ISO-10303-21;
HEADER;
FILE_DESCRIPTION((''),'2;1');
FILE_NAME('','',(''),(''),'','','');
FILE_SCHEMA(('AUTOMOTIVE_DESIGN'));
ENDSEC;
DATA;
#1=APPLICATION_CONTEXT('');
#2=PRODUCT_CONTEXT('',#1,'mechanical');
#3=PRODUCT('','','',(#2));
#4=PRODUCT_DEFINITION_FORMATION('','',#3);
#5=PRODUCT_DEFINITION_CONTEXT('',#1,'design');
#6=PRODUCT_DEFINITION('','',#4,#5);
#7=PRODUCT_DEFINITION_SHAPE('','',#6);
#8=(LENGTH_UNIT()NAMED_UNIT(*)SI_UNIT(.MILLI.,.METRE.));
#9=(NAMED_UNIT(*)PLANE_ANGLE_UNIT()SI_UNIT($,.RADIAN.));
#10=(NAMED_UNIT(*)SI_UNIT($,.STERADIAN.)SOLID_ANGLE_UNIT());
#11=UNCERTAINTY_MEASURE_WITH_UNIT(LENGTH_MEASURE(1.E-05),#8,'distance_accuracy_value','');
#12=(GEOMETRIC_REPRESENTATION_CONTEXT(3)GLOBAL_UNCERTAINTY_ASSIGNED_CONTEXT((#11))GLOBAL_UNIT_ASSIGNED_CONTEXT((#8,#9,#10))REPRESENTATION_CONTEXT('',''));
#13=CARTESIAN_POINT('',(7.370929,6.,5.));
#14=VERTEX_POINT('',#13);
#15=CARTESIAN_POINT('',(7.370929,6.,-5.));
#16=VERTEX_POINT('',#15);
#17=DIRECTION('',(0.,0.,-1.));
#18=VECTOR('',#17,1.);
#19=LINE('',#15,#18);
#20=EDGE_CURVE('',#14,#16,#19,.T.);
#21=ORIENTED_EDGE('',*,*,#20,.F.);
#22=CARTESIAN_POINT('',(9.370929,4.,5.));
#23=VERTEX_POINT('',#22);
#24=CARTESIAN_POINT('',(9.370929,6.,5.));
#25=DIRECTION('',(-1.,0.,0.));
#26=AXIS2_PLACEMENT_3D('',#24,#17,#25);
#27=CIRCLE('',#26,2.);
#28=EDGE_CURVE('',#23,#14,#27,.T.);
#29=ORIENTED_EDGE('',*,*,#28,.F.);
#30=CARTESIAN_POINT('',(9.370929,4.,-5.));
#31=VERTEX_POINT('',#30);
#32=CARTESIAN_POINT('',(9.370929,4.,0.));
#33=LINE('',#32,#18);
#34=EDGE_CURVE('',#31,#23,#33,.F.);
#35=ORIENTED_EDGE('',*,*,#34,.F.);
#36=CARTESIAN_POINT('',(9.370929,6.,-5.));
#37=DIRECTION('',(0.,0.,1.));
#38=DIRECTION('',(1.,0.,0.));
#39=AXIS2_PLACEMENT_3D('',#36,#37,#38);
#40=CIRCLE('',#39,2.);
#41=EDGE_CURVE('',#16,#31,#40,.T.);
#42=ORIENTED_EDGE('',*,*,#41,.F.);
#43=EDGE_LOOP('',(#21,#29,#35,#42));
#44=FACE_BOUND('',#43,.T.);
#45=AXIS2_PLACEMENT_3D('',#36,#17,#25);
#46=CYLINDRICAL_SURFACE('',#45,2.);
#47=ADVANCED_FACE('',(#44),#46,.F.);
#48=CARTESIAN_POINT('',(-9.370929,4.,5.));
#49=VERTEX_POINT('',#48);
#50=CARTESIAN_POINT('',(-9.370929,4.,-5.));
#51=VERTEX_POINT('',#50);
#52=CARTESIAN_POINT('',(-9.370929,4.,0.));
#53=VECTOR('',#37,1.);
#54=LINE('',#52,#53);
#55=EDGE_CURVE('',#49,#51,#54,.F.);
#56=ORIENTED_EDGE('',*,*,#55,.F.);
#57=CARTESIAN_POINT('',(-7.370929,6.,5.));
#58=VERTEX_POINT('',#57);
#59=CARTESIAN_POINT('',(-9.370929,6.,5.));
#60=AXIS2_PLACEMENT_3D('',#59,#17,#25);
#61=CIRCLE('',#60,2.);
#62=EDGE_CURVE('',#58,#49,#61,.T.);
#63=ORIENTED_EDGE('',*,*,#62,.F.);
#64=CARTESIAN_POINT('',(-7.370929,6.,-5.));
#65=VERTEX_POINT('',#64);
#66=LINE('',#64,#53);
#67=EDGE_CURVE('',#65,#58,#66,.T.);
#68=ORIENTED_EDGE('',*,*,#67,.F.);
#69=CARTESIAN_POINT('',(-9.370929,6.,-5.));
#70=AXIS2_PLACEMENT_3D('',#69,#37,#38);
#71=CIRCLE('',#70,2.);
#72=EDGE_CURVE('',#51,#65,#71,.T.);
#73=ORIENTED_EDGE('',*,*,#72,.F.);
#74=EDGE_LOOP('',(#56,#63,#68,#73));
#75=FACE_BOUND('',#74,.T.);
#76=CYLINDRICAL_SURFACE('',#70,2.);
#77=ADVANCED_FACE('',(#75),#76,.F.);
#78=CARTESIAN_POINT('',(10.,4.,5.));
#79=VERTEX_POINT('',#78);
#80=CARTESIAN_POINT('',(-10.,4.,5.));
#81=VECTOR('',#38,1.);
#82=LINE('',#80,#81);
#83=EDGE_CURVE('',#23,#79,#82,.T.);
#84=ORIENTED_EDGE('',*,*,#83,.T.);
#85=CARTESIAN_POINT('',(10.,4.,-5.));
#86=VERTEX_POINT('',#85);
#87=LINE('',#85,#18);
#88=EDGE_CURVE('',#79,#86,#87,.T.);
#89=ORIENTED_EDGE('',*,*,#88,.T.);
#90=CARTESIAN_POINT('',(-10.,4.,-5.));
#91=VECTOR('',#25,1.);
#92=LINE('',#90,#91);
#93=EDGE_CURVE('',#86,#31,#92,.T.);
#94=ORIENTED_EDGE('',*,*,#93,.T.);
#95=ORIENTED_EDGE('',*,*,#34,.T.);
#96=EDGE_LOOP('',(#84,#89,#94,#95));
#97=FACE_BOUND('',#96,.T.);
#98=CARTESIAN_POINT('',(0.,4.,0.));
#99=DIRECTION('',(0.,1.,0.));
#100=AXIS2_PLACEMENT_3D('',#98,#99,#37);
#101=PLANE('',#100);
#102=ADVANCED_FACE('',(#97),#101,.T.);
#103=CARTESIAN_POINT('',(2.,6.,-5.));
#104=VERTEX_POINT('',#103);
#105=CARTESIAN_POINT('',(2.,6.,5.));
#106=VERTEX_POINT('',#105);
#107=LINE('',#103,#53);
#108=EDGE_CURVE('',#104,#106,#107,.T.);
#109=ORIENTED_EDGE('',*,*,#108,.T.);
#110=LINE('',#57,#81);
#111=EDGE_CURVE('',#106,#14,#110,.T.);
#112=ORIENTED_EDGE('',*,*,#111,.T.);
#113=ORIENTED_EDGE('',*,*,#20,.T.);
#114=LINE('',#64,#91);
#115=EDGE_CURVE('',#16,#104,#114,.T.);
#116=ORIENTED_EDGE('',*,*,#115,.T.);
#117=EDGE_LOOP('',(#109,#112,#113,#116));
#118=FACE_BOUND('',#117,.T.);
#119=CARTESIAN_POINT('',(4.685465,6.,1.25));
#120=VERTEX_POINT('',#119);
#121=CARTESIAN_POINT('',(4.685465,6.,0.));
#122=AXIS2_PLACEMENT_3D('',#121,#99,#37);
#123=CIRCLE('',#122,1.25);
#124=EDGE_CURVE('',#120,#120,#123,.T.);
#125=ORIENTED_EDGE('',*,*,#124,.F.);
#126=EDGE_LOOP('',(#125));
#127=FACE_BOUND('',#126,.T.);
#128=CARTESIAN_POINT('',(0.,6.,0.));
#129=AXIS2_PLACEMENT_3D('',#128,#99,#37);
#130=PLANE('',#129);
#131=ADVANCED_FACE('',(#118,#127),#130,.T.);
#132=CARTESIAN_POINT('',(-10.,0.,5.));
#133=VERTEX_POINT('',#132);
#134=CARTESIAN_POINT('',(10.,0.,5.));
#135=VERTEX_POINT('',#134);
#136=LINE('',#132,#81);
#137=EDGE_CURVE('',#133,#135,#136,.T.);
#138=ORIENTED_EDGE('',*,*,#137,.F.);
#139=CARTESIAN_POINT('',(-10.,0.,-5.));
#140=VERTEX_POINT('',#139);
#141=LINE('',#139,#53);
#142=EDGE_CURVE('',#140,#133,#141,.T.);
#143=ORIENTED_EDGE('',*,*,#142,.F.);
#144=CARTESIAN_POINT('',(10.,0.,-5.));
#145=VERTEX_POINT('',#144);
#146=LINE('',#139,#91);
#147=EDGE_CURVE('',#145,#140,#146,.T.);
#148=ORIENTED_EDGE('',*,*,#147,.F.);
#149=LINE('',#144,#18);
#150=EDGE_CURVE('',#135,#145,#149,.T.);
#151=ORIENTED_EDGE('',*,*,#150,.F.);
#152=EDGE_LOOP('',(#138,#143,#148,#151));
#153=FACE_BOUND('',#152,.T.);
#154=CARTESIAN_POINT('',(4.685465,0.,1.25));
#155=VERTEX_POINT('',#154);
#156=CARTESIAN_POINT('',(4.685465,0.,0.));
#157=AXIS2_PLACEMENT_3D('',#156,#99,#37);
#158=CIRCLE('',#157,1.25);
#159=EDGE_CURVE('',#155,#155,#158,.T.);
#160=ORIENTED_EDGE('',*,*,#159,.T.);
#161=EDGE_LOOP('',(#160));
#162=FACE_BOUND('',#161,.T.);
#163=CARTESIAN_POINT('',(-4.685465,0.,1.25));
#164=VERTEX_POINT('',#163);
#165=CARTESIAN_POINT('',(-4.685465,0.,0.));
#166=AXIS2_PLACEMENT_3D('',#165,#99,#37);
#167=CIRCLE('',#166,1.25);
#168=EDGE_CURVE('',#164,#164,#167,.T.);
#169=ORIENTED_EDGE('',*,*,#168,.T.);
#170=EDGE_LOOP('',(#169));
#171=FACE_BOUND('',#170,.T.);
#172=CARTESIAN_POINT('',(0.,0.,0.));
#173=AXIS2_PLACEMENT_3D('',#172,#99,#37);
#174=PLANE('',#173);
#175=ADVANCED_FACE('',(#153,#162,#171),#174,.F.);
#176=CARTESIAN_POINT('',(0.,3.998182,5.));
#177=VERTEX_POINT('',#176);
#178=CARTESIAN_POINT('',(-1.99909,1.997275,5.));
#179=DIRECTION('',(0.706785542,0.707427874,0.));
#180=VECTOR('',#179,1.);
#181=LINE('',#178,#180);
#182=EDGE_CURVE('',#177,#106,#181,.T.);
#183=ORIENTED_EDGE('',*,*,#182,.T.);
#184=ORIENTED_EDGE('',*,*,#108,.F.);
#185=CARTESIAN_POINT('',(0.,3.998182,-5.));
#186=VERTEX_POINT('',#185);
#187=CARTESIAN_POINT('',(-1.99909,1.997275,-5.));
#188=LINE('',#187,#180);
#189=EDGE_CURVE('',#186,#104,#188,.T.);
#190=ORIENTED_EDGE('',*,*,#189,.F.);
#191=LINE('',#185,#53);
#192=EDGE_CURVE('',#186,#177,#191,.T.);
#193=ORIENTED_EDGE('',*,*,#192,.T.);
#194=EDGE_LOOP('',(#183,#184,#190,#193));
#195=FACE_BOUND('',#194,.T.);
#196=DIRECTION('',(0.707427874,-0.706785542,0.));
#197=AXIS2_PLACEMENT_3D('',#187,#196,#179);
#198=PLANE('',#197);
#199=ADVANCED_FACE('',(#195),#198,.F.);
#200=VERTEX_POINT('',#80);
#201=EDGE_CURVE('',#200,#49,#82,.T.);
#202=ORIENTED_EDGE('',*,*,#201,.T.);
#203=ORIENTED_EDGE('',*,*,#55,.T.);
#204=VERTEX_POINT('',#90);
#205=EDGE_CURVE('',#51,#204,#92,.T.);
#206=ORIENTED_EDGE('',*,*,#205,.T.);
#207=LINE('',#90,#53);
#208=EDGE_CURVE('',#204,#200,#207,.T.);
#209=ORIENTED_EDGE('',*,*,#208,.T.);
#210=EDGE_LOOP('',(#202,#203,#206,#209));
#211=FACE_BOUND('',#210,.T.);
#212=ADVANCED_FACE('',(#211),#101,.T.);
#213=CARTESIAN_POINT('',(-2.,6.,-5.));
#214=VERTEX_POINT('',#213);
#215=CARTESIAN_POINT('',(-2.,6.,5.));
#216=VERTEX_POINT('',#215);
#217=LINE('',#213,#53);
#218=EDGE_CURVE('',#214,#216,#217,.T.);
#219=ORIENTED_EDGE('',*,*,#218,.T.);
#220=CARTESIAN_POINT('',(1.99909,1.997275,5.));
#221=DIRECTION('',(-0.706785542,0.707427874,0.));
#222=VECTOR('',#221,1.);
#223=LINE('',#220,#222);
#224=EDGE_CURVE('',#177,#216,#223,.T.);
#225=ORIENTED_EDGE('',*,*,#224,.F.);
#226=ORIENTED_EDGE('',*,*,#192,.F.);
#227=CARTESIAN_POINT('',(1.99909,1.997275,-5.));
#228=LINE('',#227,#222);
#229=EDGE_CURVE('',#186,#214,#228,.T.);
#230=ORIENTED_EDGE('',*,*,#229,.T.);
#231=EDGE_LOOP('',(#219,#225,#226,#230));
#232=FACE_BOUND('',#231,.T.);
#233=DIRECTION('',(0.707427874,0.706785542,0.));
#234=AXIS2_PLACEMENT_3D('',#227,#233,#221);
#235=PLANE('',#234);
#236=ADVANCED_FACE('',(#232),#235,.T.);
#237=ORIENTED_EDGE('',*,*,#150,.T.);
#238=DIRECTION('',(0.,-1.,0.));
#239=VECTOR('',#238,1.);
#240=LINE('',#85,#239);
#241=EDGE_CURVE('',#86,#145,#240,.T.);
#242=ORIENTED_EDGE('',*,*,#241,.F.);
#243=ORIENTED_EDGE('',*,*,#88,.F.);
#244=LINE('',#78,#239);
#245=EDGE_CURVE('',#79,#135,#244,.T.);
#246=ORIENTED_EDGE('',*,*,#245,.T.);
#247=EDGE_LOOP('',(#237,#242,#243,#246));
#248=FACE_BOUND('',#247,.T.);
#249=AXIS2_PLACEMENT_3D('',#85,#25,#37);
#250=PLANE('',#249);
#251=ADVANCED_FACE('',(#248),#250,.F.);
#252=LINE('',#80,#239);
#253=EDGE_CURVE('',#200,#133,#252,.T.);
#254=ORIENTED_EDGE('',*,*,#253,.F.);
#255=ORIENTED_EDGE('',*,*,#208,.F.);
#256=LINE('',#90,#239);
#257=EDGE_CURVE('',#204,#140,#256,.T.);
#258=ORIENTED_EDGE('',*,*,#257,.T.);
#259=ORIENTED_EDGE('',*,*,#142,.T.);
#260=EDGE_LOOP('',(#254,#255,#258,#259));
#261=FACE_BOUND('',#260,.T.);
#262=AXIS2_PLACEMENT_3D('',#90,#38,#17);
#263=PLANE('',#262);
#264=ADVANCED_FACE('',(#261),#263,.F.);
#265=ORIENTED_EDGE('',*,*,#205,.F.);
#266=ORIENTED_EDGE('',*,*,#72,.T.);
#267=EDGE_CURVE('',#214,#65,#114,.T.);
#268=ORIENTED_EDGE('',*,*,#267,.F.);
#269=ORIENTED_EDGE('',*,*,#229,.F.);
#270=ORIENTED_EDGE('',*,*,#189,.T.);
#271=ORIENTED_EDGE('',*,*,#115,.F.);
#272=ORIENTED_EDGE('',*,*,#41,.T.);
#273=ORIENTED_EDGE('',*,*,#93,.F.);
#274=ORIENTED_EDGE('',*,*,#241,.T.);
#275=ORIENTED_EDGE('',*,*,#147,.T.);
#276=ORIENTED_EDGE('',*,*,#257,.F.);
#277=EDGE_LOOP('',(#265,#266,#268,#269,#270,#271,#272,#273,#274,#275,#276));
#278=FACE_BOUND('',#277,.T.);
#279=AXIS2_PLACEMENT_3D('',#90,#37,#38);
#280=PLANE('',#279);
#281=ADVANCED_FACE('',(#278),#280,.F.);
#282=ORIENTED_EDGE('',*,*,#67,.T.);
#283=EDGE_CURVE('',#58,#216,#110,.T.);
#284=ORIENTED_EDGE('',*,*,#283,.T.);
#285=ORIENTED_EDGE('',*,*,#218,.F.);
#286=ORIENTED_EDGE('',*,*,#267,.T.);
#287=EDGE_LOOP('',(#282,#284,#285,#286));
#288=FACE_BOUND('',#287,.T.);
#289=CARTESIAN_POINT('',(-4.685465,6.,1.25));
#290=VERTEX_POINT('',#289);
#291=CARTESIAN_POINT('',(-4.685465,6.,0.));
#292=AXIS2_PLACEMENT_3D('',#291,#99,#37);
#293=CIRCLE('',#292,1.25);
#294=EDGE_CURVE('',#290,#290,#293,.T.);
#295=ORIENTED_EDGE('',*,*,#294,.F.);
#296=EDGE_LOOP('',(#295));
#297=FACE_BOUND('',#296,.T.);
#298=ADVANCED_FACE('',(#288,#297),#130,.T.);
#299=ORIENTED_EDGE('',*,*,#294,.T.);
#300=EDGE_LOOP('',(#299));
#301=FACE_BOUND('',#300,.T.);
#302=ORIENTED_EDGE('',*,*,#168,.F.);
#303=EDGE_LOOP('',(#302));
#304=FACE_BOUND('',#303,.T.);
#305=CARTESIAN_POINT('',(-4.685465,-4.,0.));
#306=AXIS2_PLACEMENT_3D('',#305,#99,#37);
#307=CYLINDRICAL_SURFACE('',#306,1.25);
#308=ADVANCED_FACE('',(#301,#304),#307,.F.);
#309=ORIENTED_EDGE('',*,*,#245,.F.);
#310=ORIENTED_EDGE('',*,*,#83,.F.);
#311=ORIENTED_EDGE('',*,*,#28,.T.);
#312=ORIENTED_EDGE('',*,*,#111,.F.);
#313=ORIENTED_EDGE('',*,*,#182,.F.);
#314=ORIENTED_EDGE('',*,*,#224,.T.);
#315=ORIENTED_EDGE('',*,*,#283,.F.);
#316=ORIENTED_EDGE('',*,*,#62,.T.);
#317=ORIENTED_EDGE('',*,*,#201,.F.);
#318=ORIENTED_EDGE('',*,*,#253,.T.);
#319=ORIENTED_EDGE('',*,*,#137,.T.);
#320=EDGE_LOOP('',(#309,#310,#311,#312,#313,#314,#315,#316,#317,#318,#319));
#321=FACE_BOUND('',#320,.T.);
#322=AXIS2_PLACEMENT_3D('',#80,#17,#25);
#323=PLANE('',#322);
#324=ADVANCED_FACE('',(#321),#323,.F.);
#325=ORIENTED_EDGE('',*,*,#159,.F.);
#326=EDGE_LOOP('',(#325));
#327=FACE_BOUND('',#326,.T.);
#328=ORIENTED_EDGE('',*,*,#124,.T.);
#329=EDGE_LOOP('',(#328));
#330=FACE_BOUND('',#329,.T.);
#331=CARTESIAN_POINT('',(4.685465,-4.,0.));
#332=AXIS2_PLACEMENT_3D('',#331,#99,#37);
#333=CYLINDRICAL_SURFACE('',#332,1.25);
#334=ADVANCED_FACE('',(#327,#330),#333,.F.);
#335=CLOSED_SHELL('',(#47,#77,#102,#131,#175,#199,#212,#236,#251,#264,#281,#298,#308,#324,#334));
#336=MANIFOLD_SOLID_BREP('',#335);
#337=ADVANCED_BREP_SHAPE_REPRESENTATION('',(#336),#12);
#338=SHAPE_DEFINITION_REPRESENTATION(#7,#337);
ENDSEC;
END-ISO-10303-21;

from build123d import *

# Parameters (mm, degrees)
SKETCH1_W           = 20
SKETCH1_H           = 10
BOSS_EXTRUDE1_DEPTH = 4
SKETCH4_W           = 14.741858766
SKETCH4_H           = 10
BOSS_EXTRUDE3_DEPTH = 2
CUT_EXTRUDE2_DEPTH  = 10
SKETCH6_R           = 1.25
CUT_EXTRUDE3_DEPTH  = 10
FILLET1_R           = 2


with BuildPart() as part:
    # Sketch1 → Boss-Extrude1 (new body)
    with BuildSketch(Plane(origin=(0, 0, 0), x_dir=(1, 0, 0), z_dir=(0, 1, 0))):
        Rectangle(SKETCH1_W, SKETCH1_H)
    extrude(amount=BOSS_EXTRUDE1_DEPTH)

    # Sketch4 → Boss-Extrude3 (add)
    with BuildSketch(Plane(origin=(0, 4, 0), x_dir=(1, 0, 0), z_dir=(0, 1, 0))):
        Rectangle(SKETCH4_W, SKETCH4_H)
    extrude(amount=BOSS_EXTRUDE3_DEPTH)

    # Sketch5 → Cut-Extrude2 (cut)
    with BuildSketch(Plane.XY.offset(5)):
        Polygon((0, 3.998182385), (0, 6), (-1.5, 6), (-2, 6), align=None)
        Polygon((1.5, 6), (0, 6), (0, 3.998182385), (2, 6), align=None)
    extrude(amount=-CUT_EXTRUDE2_DEPTH, mode=Mode.SUBTRACT)

    # Sketch6 → Cut-Extrude3 (cut)
    with BuildSketch(Plane(origin=(0, 6, 0), x_dir=(1, 0, 0), z_dir=(0, 1, 0))):
        with Locations(Location((-4.685464692, 0, 0), (0, 0, 270))):
            Circle(SKETCH6_R)
        with Locations(Location((4.685464692, 0, 0), (0, 0, 270))):
            Circle(SKETCH6_R)
    extrude(amount=-CUT_EXTRUDE3_DEPTH, mode=Mode.SUBTRACT)

    # Fillet1
    fillet1_edges = [part.edges().sort_by_distance(p)[0] for p in [
        (-7.370929383, 4, 0),
        (7.370929383, 4, 0),
    ]]
    fillet(fillet1_edges, radius=FILLET1_R - 0.0001)  # a hair under: the kernel refuses the full size


solid = part.part
